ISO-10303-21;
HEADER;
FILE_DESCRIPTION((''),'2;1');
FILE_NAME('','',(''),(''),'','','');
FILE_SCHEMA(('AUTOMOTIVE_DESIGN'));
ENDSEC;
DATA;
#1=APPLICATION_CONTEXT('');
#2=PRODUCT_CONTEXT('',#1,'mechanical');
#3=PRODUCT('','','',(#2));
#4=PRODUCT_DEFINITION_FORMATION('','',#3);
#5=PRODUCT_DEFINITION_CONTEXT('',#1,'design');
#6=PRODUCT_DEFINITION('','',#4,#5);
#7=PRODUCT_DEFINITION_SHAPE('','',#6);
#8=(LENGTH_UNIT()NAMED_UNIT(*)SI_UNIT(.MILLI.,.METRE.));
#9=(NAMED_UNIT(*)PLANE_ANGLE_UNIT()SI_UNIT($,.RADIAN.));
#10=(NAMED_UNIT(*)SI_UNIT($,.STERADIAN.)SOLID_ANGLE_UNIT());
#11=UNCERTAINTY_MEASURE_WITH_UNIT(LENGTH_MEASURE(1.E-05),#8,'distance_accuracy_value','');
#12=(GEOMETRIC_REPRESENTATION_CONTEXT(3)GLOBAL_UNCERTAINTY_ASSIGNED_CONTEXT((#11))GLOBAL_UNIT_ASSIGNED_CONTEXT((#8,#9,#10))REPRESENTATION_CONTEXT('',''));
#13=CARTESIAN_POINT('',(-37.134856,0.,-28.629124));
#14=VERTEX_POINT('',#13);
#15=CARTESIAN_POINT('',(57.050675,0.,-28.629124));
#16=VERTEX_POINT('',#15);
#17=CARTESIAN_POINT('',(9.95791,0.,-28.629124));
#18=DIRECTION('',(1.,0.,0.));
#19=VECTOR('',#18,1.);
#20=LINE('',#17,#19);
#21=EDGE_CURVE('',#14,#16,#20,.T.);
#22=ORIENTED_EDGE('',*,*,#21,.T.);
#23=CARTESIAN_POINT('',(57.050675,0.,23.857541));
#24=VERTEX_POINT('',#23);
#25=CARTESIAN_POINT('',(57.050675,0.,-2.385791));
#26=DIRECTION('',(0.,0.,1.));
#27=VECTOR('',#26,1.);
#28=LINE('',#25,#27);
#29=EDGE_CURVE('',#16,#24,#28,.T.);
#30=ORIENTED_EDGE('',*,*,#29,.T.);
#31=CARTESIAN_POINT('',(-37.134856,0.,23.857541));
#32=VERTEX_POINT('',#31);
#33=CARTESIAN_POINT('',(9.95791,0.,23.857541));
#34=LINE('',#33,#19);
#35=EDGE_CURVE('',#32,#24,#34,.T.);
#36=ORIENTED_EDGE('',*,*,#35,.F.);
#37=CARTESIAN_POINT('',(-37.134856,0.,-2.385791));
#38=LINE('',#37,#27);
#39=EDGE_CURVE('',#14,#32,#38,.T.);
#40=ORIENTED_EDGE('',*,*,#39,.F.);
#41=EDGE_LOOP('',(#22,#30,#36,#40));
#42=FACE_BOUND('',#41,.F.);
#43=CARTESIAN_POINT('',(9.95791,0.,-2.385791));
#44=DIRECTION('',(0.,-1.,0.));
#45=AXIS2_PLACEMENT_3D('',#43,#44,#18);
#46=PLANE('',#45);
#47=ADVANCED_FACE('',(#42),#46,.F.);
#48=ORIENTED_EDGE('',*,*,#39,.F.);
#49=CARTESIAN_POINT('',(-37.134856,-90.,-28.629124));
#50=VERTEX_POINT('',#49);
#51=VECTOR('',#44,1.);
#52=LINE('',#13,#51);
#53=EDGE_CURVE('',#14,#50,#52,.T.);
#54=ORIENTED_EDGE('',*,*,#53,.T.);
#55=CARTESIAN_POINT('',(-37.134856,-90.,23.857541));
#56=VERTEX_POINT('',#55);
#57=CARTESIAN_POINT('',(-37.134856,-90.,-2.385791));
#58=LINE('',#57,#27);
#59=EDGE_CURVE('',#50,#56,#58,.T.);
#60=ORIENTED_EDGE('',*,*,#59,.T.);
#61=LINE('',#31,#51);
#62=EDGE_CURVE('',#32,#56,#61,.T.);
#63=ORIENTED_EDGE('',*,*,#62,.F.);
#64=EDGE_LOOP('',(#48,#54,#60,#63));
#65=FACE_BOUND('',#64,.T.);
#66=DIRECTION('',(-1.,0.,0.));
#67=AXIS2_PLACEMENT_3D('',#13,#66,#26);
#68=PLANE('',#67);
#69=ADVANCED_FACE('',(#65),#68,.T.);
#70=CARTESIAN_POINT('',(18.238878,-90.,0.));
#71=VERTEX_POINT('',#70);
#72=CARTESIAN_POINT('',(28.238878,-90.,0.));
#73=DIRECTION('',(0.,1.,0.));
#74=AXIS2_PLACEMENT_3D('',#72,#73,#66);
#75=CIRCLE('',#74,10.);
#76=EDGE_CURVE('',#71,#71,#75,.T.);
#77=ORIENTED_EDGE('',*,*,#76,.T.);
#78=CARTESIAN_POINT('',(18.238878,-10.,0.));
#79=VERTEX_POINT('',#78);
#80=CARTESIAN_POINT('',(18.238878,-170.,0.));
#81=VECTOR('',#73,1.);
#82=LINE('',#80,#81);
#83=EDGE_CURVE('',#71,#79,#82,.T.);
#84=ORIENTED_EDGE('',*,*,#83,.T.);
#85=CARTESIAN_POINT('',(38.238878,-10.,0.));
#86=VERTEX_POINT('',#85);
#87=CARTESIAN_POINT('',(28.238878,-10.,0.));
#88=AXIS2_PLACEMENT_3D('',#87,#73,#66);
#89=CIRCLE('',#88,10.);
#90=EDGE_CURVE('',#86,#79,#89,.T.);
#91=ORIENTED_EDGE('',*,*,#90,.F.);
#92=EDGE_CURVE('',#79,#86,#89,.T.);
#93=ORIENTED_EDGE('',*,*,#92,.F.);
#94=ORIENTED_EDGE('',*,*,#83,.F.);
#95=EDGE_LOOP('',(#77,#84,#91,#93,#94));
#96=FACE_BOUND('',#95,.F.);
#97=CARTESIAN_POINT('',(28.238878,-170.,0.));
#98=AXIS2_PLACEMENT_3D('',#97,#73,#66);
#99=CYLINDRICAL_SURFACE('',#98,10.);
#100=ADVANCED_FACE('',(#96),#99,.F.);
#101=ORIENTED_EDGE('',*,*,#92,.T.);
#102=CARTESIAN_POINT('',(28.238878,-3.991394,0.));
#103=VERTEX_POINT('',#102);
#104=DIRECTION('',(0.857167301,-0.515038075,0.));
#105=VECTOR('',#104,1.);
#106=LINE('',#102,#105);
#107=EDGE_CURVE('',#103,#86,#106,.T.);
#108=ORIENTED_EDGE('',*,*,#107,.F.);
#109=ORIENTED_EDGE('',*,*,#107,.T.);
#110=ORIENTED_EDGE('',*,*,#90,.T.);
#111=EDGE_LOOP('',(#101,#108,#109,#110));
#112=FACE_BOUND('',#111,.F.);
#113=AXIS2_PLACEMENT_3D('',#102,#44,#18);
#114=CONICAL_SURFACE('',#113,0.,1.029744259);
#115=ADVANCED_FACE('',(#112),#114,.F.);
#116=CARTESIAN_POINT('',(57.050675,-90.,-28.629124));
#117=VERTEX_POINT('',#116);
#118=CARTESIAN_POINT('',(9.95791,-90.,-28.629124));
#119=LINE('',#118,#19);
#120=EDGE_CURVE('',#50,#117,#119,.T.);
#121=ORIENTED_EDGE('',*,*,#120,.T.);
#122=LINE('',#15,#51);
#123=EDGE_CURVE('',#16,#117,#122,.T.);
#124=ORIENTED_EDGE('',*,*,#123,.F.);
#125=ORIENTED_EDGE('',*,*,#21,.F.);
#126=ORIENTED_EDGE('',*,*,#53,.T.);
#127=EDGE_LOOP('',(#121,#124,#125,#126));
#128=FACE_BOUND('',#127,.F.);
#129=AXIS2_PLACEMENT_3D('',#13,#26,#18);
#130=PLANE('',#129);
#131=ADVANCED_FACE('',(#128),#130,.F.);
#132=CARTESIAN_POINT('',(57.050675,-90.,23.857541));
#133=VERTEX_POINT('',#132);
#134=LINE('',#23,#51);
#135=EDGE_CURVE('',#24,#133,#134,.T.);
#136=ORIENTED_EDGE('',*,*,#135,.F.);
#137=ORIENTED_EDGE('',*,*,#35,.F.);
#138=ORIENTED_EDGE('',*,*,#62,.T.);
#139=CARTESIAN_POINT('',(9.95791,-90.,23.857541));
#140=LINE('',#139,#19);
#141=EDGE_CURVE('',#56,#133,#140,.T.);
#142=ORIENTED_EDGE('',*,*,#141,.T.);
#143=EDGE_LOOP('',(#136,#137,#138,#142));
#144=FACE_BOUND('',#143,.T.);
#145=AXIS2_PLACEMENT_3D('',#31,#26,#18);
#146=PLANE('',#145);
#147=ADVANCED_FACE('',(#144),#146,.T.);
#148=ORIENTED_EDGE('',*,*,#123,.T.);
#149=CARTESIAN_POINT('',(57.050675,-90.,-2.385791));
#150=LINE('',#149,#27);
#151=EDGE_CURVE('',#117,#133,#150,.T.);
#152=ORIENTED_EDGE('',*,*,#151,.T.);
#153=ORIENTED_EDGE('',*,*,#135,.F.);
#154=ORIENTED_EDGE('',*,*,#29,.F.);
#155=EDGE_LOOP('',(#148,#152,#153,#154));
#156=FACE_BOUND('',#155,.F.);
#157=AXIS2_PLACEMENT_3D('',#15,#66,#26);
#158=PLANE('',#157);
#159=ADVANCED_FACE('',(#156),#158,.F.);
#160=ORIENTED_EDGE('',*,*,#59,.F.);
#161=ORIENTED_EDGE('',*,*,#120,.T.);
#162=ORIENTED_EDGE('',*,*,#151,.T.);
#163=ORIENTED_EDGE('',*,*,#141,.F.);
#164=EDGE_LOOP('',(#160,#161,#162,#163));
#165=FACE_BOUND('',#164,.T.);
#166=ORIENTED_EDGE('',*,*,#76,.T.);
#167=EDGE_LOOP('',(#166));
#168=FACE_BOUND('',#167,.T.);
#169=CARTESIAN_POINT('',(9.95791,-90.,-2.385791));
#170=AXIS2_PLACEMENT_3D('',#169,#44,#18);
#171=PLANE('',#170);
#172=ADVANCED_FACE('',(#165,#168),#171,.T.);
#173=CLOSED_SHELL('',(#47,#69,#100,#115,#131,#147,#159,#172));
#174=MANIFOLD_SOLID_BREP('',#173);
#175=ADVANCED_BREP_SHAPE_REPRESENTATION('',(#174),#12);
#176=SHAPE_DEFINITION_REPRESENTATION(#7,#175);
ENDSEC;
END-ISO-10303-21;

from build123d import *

# Parameters (mm, degrees)
F0_W     = 94.1855311394
F0_H     = 52.4866655469
F1_DEPTH = 90
F4_D     = 20
F4_DEPTH = 80
F4_TIP   = 6.0086061903
F5_R     = 9.112196694
F7_DEPTH = 80


# Not quite as in the source:
# - the program builds the solid bodies; features that only make, move or delete a surface that nothing else refers to are left out


with BuildPart() as f1:
    # F0 (on Front) → F1 (new body)
    with BuildSketch(Plane.XZ):
        with Locations((9.957909584, -2.3857913911)):
            Rectangle(F0_W, F0_H)
    extrude(amount=F1_DEPTH)

    # F4
    with Locations(Plane.XZ.offset(90)):
        with Locations((28.2388776541, 0)):
            Hole(F4_D / 2, depth=F4_DEPTH)
            with Locations((0, 0, -(F4_DEPTH + F4_TIP / 2))):  # 118° drill point
                Cone(0, F4_D / 2, F4_TIP, mode=Mode.SUBTRACT)

    # F5 (on face) → F7 (cut)
    with BuildSketch(Plane.XZ.offset(90)):
        with Locations((-17.2343160957, 0)):
            Circle(F5_R)
    extrude(amount=F7_DEPTH, mode=Mode.SUBTRACT)


solid = f1.part
